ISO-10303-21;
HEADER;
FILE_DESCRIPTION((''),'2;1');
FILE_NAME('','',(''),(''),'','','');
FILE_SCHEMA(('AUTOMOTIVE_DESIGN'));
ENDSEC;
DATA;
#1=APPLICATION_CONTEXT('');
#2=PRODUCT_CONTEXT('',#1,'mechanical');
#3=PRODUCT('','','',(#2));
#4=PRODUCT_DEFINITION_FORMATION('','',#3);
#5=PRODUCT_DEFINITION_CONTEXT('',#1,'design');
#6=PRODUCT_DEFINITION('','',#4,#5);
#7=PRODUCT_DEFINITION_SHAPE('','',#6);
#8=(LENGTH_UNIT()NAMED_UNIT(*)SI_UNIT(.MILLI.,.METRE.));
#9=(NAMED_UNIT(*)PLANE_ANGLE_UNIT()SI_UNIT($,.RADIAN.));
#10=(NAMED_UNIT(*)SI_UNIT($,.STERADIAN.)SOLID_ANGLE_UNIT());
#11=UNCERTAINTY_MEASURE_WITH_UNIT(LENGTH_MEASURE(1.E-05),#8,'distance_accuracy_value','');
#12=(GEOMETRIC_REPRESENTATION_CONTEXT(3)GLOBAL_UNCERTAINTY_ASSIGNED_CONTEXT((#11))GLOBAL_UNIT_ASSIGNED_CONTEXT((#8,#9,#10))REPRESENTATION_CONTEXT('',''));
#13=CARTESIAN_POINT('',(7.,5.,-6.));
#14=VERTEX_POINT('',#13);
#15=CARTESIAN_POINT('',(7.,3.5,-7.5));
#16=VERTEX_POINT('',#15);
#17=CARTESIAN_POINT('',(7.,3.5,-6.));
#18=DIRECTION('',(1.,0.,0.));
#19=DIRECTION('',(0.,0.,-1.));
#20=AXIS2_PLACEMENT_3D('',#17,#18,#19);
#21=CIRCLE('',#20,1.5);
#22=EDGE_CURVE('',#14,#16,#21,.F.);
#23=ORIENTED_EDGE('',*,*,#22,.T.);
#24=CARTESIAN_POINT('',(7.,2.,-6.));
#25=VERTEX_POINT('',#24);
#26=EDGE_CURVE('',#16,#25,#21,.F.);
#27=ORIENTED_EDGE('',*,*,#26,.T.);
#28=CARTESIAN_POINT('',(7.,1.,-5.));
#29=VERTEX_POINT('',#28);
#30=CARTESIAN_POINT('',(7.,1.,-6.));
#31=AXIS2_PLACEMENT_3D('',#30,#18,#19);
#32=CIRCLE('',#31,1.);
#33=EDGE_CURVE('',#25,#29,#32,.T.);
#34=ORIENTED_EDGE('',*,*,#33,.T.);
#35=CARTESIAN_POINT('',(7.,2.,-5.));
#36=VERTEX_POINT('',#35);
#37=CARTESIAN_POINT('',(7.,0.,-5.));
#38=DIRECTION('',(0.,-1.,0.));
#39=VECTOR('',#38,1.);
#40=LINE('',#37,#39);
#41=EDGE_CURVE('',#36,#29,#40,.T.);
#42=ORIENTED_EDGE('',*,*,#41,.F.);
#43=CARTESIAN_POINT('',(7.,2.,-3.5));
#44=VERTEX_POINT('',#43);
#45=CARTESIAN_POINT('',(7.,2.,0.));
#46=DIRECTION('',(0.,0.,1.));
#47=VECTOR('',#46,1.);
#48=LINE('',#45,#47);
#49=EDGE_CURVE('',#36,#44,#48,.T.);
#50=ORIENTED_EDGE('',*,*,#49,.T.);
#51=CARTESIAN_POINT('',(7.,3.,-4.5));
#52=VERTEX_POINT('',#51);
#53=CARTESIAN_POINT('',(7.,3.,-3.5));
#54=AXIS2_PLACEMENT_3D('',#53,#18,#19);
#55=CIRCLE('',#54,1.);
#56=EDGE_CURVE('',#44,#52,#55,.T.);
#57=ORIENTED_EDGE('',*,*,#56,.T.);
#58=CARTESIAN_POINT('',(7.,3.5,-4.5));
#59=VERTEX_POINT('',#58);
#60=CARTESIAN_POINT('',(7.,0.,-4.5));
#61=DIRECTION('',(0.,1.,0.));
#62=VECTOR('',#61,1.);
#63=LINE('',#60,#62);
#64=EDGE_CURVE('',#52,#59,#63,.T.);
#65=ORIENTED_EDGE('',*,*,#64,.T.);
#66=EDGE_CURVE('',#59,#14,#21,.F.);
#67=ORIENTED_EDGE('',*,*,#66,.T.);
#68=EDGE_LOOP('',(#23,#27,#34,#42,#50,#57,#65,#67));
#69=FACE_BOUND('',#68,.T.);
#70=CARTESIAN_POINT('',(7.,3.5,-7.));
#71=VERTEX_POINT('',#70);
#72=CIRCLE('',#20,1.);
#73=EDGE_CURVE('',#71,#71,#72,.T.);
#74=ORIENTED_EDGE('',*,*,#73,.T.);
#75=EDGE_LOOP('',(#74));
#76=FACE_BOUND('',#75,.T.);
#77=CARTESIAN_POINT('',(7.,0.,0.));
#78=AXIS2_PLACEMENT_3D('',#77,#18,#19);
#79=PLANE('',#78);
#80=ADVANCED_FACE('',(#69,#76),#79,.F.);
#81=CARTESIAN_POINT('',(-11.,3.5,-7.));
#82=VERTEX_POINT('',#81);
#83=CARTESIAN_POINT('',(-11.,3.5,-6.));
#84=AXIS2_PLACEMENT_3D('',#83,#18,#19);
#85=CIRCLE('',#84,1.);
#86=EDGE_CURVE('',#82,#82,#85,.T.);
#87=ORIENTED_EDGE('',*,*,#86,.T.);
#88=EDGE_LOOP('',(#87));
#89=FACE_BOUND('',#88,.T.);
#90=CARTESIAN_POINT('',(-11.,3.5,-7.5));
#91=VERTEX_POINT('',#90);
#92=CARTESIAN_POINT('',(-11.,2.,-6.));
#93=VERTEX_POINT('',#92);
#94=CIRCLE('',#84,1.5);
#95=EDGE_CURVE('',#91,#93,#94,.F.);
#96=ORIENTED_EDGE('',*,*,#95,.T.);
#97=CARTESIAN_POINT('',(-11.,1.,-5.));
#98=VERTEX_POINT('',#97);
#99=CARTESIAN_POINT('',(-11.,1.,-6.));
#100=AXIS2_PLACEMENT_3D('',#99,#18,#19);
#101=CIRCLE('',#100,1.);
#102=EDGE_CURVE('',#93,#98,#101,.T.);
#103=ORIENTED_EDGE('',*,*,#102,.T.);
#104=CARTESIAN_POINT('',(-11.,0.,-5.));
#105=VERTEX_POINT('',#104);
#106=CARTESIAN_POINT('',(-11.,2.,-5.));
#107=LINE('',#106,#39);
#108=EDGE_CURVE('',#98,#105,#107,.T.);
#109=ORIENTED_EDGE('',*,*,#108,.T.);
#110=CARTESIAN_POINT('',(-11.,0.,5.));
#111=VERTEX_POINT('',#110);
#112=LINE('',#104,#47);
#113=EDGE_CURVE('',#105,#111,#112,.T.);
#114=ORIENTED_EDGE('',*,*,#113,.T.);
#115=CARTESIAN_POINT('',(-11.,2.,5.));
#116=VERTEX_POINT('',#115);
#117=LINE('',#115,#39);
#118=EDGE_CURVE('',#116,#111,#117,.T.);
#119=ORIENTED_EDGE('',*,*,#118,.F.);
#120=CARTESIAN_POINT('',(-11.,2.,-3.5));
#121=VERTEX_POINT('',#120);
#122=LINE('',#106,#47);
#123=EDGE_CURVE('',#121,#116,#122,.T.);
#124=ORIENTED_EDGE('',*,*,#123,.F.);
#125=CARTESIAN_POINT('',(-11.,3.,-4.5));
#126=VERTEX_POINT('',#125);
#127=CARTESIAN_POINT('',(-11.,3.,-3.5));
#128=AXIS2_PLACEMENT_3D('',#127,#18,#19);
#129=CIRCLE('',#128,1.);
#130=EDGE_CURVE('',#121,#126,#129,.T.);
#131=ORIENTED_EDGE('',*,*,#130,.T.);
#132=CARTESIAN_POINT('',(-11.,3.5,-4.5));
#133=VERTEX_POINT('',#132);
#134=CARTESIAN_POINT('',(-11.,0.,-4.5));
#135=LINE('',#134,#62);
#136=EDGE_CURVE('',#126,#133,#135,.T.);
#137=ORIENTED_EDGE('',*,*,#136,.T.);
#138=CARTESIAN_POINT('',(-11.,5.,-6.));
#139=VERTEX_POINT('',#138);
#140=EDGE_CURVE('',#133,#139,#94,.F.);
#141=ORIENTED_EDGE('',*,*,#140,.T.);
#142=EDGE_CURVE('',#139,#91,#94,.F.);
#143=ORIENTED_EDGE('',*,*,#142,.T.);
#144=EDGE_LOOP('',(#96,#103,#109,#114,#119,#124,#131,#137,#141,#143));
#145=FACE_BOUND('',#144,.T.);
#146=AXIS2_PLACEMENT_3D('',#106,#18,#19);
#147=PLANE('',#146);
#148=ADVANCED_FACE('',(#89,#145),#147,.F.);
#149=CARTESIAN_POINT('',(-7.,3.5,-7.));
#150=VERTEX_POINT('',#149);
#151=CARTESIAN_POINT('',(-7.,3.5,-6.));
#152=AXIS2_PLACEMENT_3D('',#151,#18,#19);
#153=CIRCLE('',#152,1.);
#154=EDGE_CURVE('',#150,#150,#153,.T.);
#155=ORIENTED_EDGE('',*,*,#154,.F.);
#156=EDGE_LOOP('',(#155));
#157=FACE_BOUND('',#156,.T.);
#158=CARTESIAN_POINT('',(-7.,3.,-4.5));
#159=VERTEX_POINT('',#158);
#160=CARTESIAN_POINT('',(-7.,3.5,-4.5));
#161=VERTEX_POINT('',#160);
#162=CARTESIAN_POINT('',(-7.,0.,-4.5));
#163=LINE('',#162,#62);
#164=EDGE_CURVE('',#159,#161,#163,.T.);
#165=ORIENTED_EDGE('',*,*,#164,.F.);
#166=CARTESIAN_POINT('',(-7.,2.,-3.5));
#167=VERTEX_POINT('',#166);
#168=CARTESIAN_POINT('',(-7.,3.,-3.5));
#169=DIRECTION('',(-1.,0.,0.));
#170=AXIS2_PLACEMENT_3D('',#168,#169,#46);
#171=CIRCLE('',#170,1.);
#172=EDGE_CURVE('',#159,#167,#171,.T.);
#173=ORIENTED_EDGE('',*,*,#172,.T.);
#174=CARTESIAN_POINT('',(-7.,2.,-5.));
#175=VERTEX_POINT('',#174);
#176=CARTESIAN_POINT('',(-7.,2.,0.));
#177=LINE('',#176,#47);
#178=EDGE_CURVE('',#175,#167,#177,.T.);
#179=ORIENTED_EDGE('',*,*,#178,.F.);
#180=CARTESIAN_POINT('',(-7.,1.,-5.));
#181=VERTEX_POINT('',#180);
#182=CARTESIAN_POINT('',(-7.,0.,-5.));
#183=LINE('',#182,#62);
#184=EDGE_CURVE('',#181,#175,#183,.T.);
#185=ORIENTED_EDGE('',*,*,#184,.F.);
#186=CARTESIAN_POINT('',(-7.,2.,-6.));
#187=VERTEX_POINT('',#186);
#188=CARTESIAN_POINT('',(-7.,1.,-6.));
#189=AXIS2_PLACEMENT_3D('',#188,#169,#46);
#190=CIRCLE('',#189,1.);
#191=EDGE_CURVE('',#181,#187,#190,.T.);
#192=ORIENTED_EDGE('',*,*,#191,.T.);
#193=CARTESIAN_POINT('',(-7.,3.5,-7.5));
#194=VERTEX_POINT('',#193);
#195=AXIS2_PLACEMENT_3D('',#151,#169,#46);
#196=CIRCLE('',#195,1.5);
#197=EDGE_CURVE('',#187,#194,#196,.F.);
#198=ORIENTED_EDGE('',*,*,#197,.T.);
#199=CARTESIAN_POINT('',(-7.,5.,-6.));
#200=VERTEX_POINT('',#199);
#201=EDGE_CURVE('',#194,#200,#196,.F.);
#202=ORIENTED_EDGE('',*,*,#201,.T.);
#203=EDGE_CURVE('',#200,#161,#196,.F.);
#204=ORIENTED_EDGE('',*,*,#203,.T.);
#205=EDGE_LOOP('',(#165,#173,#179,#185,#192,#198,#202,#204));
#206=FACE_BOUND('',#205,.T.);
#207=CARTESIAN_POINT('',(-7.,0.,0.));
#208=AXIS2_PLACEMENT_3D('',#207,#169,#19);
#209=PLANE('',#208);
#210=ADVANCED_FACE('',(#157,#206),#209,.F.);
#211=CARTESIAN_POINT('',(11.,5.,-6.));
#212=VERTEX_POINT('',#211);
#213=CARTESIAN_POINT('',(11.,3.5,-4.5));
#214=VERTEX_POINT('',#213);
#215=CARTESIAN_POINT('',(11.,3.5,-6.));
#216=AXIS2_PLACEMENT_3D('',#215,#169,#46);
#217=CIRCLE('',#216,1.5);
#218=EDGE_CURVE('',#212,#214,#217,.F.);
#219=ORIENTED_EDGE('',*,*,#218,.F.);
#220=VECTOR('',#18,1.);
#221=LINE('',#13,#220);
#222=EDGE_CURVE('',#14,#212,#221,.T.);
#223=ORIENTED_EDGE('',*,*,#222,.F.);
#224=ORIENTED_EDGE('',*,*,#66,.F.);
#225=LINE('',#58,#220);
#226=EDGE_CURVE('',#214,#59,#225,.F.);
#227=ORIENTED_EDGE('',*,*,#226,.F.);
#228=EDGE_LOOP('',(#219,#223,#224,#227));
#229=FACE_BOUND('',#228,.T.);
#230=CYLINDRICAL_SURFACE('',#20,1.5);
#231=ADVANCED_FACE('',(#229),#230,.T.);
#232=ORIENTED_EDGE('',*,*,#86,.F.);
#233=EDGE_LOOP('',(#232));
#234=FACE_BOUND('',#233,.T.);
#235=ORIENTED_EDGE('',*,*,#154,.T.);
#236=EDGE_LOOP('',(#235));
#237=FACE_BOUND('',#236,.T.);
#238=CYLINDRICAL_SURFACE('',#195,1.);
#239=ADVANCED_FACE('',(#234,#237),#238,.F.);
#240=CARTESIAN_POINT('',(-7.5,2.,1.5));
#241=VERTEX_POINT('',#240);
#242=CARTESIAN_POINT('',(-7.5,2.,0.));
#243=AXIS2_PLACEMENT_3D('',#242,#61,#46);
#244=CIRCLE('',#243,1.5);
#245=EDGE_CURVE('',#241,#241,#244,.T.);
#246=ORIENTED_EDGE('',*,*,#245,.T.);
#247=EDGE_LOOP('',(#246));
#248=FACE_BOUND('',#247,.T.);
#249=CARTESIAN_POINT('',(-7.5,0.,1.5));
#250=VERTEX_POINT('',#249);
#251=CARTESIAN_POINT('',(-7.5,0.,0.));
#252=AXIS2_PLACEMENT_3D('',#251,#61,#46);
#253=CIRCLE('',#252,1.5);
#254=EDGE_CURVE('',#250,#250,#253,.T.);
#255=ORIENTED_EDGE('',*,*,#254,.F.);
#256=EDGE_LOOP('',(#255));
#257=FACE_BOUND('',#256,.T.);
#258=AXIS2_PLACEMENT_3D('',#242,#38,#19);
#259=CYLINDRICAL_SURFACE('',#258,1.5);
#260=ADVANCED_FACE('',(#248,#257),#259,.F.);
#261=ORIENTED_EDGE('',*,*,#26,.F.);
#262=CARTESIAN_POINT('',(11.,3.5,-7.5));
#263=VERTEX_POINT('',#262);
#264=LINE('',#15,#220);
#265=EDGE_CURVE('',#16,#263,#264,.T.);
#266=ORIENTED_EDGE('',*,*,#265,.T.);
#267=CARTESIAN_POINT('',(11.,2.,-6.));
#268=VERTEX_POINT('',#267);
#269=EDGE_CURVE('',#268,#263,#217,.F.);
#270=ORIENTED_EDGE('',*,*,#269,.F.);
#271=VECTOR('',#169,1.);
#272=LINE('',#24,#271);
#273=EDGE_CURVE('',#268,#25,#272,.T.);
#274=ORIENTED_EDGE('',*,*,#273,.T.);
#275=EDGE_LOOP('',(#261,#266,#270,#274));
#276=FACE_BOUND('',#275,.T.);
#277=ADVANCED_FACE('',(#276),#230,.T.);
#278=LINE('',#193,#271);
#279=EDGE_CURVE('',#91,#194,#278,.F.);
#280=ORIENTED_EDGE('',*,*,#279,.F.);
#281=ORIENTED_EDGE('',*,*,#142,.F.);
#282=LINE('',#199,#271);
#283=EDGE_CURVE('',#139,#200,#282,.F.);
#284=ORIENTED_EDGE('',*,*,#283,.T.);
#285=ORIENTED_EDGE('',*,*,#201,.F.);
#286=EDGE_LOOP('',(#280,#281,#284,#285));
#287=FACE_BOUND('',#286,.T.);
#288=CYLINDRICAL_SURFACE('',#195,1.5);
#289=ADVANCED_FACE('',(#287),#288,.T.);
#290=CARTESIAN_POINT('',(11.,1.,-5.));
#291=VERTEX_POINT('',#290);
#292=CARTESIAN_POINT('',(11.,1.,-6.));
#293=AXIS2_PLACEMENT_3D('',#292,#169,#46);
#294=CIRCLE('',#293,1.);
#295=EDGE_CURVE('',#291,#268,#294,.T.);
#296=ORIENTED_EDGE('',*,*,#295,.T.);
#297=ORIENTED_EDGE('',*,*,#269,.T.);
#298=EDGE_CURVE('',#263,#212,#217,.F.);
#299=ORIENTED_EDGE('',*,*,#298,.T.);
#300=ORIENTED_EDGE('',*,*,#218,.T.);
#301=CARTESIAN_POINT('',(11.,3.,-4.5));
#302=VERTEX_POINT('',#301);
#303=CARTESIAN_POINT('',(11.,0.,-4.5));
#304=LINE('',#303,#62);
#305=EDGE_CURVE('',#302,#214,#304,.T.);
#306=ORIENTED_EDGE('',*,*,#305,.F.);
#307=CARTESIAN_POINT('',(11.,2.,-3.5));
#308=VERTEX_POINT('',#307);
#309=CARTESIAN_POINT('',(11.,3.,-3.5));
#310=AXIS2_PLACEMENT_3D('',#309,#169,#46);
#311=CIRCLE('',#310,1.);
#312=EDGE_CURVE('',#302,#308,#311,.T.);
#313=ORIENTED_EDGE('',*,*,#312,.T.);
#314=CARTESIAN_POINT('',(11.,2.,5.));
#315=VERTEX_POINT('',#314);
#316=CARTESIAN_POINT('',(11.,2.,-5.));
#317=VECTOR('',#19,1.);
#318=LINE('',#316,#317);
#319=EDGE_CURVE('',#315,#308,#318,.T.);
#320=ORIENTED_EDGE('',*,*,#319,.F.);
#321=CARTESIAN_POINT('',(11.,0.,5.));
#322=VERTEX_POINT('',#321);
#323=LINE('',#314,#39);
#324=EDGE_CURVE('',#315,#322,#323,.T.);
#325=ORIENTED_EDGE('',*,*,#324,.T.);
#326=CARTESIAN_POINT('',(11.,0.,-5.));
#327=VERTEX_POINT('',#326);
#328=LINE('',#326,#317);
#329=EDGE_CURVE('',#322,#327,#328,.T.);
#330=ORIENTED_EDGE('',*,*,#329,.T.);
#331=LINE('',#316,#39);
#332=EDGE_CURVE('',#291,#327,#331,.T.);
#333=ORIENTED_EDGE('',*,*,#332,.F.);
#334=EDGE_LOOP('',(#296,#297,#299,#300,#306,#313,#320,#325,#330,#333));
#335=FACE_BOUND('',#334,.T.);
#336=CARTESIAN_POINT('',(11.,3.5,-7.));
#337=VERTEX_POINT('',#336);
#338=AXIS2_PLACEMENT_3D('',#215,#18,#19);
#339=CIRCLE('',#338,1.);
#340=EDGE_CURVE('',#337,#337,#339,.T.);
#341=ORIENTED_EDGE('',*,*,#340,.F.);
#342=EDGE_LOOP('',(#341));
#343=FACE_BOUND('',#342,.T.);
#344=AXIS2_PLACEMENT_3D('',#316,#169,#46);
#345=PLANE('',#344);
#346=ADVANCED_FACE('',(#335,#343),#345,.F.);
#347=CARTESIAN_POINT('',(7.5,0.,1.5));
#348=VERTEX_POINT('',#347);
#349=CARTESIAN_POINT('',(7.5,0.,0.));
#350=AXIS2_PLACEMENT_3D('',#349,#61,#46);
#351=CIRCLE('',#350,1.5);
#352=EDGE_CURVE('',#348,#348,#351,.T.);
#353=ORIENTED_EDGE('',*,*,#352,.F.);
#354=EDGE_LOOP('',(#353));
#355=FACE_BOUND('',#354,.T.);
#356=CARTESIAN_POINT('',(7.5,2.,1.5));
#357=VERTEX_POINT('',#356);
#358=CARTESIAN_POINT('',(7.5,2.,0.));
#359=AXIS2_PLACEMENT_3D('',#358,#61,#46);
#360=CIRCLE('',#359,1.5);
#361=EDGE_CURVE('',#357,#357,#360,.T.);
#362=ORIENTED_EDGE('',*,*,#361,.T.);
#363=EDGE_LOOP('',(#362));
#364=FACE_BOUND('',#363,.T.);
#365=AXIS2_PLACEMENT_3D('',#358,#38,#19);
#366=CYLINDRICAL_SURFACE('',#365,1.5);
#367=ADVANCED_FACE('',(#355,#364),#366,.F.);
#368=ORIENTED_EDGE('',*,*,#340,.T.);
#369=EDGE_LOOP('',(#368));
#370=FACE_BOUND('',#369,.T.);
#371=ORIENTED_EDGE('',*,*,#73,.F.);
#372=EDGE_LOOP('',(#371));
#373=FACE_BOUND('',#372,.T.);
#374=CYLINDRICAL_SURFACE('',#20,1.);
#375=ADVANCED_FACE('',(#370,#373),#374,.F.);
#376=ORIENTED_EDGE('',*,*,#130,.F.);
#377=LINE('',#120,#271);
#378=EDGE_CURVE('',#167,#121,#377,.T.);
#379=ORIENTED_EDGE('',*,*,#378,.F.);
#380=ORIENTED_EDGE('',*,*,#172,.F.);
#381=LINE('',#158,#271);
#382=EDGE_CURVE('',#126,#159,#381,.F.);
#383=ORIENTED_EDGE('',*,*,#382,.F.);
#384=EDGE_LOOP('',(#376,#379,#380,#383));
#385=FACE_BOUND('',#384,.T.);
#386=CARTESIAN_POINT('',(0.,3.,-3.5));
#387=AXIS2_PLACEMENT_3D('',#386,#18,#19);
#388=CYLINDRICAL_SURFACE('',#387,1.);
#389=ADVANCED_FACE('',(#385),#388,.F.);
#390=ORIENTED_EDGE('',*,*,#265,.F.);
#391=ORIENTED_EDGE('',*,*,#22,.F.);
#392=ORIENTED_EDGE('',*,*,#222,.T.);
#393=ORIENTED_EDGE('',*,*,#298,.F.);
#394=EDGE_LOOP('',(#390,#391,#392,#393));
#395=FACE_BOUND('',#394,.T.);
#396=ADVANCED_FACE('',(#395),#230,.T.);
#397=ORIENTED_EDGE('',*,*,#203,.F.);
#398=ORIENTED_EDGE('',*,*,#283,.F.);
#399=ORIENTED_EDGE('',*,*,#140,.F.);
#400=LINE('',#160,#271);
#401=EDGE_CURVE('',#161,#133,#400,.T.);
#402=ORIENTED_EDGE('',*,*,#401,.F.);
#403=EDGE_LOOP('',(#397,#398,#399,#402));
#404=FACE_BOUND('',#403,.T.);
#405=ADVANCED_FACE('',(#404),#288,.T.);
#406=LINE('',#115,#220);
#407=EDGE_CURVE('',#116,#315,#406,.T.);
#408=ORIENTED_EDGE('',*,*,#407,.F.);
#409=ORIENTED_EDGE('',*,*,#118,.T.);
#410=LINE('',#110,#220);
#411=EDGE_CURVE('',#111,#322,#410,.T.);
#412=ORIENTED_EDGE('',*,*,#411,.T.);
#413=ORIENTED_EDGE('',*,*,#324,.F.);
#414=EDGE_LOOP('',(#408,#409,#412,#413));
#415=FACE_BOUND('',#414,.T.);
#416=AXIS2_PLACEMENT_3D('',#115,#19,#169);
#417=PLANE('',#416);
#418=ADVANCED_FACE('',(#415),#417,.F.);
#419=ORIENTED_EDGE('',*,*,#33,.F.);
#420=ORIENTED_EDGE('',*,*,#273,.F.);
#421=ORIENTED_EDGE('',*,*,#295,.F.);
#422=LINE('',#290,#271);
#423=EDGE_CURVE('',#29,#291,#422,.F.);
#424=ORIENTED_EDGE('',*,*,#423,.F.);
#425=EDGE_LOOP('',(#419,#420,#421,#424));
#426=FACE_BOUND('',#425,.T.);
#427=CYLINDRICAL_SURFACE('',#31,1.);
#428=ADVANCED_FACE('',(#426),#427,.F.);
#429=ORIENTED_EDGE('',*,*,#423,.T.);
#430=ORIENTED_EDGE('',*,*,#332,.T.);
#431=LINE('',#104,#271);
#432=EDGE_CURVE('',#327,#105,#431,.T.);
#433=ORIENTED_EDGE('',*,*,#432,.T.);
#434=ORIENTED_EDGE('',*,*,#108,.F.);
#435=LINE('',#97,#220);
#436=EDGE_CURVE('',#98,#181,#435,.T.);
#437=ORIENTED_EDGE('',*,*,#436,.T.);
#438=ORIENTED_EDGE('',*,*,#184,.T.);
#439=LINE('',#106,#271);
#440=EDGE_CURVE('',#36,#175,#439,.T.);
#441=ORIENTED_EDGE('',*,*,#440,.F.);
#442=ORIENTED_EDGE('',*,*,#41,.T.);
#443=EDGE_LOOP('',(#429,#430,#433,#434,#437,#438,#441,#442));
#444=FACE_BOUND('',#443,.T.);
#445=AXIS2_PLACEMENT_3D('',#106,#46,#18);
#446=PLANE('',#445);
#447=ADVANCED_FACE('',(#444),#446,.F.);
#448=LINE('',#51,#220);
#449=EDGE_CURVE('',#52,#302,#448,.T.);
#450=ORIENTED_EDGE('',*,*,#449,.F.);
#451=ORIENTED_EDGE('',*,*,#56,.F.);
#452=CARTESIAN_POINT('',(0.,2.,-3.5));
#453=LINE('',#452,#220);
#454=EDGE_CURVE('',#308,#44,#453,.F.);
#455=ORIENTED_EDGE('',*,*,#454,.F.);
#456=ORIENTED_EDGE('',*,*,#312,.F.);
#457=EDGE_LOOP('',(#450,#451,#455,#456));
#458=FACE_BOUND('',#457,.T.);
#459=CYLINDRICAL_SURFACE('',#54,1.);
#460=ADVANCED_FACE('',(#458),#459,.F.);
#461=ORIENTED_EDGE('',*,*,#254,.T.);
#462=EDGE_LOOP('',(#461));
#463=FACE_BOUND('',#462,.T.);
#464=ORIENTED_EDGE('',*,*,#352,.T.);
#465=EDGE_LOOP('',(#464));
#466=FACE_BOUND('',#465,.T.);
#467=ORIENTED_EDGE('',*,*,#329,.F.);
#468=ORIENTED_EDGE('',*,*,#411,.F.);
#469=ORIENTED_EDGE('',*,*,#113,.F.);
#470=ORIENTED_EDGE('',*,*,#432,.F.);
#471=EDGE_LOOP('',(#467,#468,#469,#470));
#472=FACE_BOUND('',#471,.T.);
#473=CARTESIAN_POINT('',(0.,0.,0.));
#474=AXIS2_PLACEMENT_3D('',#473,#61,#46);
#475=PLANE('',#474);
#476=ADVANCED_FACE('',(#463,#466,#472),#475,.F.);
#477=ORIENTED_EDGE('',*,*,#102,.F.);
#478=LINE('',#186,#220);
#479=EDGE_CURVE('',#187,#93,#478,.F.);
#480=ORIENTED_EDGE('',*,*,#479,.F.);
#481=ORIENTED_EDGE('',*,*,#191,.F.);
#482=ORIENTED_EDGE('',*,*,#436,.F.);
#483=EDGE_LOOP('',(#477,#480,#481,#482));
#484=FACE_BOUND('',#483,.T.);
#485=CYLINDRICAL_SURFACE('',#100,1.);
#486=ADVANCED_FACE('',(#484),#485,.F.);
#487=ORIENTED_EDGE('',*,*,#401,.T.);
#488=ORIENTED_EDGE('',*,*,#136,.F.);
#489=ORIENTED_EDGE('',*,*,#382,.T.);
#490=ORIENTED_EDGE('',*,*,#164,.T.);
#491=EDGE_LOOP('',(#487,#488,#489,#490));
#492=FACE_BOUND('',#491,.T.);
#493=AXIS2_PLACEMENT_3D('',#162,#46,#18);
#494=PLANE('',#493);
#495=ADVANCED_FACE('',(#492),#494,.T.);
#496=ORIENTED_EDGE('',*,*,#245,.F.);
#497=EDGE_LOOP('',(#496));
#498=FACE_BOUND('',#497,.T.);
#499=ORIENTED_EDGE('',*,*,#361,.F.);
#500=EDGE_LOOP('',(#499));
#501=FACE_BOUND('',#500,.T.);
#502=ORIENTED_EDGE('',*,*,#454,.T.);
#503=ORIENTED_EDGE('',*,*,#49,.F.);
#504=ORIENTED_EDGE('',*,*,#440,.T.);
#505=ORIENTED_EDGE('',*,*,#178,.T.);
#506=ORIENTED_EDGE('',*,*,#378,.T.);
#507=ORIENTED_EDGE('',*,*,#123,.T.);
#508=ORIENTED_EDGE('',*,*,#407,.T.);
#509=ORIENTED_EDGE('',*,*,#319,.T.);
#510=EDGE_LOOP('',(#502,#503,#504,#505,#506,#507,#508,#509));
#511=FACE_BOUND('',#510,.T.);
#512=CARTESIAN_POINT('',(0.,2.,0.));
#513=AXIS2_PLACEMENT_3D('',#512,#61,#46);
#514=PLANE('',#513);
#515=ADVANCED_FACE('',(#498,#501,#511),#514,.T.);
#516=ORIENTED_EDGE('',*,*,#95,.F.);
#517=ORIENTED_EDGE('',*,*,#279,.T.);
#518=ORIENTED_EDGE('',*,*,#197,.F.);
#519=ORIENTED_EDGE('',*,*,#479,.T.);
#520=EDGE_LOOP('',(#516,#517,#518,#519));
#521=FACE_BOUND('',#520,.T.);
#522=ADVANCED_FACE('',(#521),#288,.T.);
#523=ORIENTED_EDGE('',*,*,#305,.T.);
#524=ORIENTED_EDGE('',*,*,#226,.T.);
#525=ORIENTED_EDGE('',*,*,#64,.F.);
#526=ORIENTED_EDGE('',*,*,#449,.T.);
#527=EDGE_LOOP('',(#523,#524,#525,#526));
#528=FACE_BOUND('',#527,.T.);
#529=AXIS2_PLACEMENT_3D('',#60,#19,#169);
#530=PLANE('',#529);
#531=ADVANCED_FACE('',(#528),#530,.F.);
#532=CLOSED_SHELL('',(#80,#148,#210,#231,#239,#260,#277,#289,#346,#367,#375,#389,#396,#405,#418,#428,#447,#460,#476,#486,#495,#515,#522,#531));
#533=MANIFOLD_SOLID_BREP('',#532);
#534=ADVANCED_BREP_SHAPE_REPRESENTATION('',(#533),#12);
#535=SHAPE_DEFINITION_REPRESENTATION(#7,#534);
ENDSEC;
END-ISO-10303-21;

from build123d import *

# Parameters (mm, degrees)
SKETCH2_W           = 22
SKETCH2_H           = 10
SKETCH2_R           = 1.5
BOSS_EXTRUDE1_DEPTH = 2
SKETCH3_W           = 3
SKETCH3_H           = 3
SKETCH3_R           = 1
BOSS_EXTRUDE2_DEPTH = 4
FILLET1_R           = 1.5
FILLET2_R           = 1
FILLET3_R           = 1
FILLET4_R           = 1.5


with BuildPart() as part:
    # Sketch2 → Boss-Extrude1 (new body)
    with BuildSketch(Plane(origin=(0, 0, 0), x_dir=(1, 0, 0), z_dir=(0, 1, 0))):
        Rectangle(SKETCH2_W, SKETCH2_H)
        with Locations(Location((-7.5, 0, 0), (0, 0, 270))):
            Circle(SKETCH2_R, mode=Mode.SUBTRACT)
        with Locations(Location((7.5, 0, 0), (0, 0, 270))):
            Circle(SKETCH2_R, mode=Mode.SUBTRACT)
    extrude(amount=BOSS_EXTRUDE1_DEPTH)

    # Sketch3 → Boss-Extrude2 (add)
    with BuildSketch(Plane(origin=(11, 0, 0), x_dir=(0, 0, -1), z_dir=(1, 0, 0))):
        with Locations((6, 3.5)):
            Rectangle(SKETCH3_W, SKETCH3_H)
        with Locations((6, 3.5)):
            Circle(SKETCH3_R, mode=Mode.SUBTRACT)
    boss_extrude2 = extrude(amount=-BOSS_EXTRUDE2_DEPTH)

    # Mirror1: Boss-Extrude2 across plane
    add(boss_extrude2.mirror(Plane(origin=(0, 0, 0), x_dir=(0, 0, 1), z_dir=(1, 0, 0))))

    # Fillet1
    fillet1_edges = [part.edges().sort_by_distance(p)[0] for p in [
        (9, 5, -7.5),
        (9, 5, -4.5),
        (-9, 5, -7.5),
        (-9, 5, -4.5),
    ]]
    fillet(fillet1_edges, radius=FILLET1_R - 0.0001)  # a hair under: the kernel refuses the full size

    # Fillet2
    fillet2_edges = [part.edges().sort_by_distance(p)[0] for p in [
        (9, 2, -4.5),
        (-9, 2, -4.5),
    ]]
    fillet(fillet2_edges, radius=FILLET2_R)

    # Fillet3
    fillet3_edges = [part.edges().sort_by_distance(p)[0] for p in [
        (-9, 2, -5),
        (9, 2, -5),
    ]]
    fillet(fillet3_edges, radius=FILLET3_R)

    # Fillet4
    fillet4_edges = [part.edges().sort_by_distance(p)[0] for p in [
        (-9, 2, -7.5),
        (9, 2, -7.5),
    ]]
    fillet(fillet4_edges, radius=FILLET4_R - 0.0001)  # a hair under: the kernel refuses the full size


solid = part.part
